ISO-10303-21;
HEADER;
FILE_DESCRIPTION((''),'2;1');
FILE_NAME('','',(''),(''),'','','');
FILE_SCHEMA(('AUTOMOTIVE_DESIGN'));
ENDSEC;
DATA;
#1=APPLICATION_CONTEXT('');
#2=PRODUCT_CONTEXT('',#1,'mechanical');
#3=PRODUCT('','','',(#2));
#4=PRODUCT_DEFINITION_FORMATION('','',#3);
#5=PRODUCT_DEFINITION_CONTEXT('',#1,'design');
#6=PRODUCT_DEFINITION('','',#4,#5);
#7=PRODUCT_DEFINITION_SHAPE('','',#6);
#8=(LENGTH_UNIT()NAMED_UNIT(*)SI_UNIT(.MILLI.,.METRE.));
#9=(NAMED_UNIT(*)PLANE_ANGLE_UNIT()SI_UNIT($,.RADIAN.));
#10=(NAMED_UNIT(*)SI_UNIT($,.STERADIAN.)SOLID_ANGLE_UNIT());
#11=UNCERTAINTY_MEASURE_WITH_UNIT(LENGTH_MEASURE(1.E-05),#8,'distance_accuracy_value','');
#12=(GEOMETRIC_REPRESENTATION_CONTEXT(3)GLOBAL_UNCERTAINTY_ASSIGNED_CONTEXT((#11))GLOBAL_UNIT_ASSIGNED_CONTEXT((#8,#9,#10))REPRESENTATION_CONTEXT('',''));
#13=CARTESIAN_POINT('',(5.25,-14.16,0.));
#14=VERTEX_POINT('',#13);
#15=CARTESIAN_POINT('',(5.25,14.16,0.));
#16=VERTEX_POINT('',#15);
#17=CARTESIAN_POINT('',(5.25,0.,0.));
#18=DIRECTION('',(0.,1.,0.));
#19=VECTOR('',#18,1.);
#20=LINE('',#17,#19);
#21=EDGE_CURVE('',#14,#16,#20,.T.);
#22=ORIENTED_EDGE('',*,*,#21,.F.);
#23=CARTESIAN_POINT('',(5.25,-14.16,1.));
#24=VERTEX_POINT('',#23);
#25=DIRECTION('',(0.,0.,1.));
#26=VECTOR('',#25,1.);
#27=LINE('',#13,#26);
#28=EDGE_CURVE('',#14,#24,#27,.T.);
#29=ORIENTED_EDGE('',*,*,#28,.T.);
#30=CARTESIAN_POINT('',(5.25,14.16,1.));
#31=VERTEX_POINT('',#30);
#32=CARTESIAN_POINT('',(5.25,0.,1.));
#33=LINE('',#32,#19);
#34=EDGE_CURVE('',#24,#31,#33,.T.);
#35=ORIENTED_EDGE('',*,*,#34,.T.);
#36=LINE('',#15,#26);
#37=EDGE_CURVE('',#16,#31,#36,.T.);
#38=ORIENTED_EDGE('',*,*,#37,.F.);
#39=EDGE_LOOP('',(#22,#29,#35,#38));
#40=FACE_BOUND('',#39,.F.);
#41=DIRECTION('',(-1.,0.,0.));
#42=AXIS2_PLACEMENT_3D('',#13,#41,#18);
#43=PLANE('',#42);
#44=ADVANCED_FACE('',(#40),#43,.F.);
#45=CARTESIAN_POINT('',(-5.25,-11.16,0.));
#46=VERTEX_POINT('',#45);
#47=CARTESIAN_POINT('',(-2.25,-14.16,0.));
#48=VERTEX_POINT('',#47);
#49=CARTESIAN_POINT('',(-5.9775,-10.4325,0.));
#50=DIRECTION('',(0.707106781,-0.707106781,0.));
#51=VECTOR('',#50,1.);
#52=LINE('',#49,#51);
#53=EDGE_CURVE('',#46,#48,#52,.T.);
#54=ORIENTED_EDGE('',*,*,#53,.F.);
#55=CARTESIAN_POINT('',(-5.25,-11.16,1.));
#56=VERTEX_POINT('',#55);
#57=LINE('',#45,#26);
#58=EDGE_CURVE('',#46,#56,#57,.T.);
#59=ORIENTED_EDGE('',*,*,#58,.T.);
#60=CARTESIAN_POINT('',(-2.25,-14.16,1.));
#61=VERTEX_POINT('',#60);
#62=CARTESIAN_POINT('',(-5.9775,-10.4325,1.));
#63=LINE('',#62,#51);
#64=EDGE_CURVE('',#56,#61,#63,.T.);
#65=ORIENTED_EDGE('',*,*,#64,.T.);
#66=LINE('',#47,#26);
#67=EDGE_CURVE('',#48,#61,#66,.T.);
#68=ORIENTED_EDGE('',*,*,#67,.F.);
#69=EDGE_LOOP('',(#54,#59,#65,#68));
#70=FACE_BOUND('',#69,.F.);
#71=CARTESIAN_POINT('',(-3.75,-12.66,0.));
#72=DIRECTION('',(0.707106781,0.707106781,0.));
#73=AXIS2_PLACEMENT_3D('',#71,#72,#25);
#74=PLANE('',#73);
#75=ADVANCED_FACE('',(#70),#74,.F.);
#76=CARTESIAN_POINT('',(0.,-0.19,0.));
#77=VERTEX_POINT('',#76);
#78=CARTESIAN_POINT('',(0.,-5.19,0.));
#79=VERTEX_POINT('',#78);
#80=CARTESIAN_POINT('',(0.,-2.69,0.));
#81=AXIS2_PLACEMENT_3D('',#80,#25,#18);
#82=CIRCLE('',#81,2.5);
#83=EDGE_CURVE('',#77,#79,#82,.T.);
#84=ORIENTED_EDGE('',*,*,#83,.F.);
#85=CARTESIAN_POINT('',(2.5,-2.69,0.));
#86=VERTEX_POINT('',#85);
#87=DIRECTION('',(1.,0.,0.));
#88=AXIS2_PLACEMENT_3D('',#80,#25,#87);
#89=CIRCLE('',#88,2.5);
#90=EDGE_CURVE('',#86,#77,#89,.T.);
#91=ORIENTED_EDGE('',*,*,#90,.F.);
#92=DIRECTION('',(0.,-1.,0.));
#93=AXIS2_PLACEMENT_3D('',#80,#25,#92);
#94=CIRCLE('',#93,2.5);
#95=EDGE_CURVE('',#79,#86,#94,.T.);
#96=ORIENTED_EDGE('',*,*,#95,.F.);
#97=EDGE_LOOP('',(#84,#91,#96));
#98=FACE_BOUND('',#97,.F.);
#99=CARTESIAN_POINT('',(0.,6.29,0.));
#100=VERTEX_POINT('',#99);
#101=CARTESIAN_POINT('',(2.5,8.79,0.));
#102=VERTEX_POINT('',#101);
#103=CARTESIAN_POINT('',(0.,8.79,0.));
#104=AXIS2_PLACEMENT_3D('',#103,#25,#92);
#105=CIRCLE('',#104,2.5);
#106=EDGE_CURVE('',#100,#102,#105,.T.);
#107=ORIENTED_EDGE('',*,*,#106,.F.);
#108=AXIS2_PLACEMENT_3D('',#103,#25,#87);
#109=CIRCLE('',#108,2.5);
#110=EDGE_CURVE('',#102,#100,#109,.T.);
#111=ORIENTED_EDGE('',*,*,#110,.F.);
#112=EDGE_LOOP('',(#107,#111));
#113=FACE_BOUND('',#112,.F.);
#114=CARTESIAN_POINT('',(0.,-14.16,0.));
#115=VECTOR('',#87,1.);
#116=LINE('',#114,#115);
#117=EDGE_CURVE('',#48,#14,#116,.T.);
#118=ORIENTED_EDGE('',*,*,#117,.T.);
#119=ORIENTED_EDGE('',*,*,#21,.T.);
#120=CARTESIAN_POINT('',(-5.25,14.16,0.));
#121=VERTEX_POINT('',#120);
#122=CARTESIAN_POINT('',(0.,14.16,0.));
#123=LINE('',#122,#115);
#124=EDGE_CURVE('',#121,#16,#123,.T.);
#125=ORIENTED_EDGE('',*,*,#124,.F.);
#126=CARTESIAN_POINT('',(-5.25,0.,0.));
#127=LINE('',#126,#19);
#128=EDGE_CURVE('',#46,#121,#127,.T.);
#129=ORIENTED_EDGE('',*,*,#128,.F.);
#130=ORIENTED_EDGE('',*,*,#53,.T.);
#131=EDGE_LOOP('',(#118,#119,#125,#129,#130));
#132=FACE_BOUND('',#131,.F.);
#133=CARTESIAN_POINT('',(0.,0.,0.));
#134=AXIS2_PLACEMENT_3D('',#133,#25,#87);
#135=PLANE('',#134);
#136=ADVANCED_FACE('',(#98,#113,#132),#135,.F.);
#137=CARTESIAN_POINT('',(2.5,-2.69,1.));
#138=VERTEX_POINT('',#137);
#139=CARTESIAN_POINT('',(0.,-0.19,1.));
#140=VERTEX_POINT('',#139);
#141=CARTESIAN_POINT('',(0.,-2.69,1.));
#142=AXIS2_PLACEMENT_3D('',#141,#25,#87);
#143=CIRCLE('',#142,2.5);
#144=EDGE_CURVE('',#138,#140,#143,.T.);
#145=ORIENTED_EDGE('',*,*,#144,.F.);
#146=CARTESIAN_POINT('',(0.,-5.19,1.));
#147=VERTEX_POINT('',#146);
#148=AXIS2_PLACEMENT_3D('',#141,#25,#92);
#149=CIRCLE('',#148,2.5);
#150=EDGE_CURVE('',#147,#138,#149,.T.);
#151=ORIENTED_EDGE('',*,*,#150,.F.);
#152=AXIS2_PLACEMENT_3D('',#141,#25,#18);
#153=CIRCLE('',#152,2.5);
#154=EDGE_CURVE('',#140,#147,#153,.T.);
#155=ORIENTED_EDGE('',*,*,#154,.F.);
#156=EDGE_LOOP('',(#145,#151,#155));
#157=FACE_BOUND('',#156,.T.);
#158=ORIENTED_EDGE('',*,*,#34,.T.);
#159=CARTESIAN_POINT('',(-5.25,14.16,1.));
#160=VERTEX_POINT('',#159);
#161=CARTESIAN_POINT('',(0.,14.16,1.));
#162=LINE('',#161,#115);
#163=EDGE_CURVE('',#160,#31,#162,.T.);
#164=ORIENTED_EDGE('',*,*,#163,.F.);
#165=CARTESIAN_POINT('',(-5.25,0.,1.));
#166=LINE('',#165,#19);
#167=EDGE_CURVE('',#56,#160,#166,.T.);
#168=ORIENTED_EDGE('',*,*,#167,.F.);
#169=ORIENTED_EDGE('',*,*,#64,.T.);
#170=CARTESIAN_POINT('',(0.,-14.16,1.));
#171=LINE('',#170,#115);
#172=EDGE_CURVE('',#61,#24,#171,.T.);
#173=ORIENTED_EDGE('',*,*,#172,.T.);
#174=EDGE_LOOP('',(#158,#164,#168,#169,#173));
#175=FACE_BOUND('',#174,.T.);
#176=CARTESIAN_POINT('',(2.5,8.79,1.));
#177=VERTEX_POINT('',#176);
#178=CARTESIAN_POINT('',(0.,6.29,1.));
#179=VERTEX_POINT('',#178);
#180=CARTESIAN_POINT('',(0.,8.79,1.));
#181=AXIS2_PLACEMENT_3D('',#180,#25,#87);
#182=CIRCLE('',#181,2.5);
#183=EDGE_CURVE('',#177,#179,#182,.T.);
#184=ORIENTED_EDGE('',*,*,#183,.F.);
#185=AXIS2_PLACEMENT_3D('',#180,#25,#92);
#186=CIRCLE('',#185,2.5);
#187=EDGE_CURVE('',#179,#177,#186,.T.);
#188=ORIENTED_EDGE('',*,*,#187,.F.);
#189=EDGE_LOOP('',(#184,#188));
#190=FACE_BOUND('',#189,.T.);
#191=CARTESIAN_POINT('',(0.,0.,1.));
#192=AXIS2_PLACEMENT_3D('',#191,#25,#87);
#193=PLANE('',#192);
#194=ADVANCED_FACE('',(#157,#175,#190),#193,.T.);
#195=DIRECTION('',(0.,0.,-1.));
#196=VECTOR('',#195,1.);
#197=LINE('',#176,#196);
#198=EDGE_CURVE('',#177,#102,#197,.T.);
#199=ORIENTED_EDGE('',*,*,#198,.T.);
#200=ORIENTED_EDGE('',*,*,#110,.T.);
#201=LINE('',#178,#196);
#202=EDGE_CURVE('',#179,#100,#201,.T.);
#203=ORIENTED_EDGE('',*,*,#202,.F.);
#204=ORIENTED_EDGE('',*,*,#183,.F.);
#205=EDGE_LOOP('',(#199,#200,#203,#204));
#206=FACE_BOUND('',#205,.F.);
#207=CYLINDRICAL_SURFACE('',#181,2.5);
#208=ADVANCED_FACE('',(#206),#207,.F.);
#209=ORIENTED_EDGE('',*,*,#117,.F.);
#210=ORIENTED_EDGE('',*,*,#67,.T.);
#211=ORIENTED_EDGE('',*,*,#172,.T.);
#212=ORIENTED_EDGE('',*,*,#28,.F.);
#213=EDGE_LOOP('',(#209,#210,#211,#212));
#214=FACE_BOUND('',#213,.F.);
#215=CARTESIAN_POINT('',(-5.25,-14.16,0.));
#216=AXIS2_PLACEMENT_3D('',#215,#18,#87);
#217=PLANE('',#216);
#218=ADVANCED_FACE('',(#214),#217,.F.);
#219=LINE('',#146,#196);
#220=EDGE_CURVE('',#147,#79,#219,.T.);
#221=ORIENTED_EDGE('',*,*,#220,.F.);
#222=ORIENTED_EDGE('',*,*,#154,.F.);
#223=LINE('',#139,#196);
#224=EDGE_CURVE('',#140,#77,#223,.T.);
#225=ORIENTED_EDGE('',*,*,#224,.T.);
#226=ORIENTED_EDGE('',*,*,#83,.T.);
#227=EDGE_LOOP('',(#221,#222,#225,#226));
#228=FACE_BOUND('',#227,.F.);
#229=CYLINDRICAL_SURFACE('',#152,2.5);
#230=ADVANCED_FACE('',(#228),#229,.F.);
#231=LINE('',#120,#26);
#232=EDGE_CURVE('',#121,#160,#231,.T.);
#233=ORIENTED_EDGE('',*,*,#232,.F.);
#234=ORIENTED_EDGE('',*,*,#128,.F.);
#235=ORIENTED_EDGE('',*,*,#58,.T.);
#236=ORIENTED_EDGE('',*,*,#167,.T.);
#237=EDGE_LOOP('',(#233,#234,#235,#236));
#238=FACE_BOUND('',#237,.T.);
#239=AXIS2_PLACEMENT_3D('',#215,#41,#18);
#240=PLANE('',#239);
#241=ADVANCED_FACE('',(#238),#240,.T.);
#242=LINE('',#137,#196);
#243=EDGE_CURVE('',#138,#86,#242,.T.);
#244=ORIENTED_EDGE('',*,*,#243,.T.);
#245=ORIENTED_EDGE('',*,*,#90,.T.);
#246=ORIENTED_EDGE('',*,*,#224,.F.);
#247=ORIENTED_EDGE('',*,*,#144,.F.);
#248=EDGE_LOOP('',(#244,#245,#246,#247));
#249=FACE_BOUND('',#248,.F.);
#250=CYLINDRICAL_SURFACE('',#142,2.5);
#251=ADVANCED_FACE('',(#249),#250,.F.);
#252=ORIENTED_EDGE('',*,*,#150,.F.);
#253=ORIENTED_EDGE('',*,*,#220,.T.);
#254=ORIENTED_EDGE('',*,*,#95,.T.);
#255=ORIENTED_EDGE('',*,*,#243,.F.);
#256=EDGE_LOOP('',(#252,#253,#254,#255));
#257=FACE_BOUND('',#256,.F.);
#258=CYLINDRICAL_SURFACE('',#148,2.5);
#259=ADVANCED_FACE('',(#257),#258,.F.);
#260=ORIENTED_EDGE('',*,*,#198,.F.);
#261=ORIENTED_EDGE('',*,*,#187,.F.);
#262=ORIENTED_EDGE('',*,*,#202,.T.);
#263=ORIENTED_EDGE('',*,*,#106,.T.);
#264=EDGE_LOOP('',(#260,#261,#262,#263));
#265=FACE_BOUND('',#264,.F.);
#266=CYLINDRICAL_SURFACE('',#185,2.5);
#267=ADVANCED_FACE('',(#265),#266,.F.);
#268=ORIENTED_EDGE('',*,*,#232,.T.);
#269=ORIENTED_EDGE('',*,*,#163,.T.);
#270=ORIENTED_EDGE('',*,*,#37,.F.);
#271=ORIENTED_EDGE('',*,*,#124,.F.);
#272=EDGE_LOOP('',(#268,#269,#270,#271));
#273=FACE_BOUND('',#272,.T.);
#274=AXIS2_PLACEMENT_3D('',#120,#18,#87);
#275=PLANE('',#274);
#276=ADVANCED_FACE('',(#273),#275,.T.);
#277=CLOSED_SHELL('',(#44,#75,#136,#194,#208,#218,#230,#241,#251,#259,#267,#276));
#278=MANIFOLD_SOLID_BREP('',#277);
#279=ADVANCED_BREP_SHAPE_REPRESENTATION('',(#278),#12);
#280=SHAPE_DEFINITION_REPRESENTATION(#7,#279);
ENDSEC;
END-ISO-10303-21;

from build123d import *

# Parameters (mm, degrees)
F0_W     = 10.5
F0_H     = 28.32
F1_DEPTH = 1
F3_DEPTH = 1.5
F4_SIZE  = 3


with BuildPart() as f1:
    # F0 (on Top) → F1 (new body)
    with BuildSketch(Plane.XY):
        Rectangle(F0_W, F0_H)
    extrude(amount=F1_DEPTH)

    # F2 (on face) → F3 (cut)
    with BuildSketch(Plane.XY.offset(1)):
        with BuildLine():
            ThreePointArc((2.5, 8.79), (-1.767766953, 10.557766953), (0, 6.29))
            ThreePointArc((0, 6.29), (1.767766953, 7.022233047), (2.5, 8.79))
        make_face()
        with BuildLine():
            ThreePointArc((0, -0.19), (-2.5, -2.69), (0, -5.19))
            ThreePointArc((0, -5.19), (1.767766953, -4.457766953), (2.5, -2.69))
            ThreePointArc((2.5, -2.69), (1.767766953, -0.922233047), (0, -0.19))
        make_face()
    extrude(amount=-F3_DEPTH, mode=Mode.SUBTRACT)

    # F4
    f4_edges = [f1.edges().sort_by_distance(p)[0] for p in [
        (-5.25, -14.16, 0.5),
    ]]
    chamfer(f4_edges, length=F4_SIZE)


solid = f1.part
